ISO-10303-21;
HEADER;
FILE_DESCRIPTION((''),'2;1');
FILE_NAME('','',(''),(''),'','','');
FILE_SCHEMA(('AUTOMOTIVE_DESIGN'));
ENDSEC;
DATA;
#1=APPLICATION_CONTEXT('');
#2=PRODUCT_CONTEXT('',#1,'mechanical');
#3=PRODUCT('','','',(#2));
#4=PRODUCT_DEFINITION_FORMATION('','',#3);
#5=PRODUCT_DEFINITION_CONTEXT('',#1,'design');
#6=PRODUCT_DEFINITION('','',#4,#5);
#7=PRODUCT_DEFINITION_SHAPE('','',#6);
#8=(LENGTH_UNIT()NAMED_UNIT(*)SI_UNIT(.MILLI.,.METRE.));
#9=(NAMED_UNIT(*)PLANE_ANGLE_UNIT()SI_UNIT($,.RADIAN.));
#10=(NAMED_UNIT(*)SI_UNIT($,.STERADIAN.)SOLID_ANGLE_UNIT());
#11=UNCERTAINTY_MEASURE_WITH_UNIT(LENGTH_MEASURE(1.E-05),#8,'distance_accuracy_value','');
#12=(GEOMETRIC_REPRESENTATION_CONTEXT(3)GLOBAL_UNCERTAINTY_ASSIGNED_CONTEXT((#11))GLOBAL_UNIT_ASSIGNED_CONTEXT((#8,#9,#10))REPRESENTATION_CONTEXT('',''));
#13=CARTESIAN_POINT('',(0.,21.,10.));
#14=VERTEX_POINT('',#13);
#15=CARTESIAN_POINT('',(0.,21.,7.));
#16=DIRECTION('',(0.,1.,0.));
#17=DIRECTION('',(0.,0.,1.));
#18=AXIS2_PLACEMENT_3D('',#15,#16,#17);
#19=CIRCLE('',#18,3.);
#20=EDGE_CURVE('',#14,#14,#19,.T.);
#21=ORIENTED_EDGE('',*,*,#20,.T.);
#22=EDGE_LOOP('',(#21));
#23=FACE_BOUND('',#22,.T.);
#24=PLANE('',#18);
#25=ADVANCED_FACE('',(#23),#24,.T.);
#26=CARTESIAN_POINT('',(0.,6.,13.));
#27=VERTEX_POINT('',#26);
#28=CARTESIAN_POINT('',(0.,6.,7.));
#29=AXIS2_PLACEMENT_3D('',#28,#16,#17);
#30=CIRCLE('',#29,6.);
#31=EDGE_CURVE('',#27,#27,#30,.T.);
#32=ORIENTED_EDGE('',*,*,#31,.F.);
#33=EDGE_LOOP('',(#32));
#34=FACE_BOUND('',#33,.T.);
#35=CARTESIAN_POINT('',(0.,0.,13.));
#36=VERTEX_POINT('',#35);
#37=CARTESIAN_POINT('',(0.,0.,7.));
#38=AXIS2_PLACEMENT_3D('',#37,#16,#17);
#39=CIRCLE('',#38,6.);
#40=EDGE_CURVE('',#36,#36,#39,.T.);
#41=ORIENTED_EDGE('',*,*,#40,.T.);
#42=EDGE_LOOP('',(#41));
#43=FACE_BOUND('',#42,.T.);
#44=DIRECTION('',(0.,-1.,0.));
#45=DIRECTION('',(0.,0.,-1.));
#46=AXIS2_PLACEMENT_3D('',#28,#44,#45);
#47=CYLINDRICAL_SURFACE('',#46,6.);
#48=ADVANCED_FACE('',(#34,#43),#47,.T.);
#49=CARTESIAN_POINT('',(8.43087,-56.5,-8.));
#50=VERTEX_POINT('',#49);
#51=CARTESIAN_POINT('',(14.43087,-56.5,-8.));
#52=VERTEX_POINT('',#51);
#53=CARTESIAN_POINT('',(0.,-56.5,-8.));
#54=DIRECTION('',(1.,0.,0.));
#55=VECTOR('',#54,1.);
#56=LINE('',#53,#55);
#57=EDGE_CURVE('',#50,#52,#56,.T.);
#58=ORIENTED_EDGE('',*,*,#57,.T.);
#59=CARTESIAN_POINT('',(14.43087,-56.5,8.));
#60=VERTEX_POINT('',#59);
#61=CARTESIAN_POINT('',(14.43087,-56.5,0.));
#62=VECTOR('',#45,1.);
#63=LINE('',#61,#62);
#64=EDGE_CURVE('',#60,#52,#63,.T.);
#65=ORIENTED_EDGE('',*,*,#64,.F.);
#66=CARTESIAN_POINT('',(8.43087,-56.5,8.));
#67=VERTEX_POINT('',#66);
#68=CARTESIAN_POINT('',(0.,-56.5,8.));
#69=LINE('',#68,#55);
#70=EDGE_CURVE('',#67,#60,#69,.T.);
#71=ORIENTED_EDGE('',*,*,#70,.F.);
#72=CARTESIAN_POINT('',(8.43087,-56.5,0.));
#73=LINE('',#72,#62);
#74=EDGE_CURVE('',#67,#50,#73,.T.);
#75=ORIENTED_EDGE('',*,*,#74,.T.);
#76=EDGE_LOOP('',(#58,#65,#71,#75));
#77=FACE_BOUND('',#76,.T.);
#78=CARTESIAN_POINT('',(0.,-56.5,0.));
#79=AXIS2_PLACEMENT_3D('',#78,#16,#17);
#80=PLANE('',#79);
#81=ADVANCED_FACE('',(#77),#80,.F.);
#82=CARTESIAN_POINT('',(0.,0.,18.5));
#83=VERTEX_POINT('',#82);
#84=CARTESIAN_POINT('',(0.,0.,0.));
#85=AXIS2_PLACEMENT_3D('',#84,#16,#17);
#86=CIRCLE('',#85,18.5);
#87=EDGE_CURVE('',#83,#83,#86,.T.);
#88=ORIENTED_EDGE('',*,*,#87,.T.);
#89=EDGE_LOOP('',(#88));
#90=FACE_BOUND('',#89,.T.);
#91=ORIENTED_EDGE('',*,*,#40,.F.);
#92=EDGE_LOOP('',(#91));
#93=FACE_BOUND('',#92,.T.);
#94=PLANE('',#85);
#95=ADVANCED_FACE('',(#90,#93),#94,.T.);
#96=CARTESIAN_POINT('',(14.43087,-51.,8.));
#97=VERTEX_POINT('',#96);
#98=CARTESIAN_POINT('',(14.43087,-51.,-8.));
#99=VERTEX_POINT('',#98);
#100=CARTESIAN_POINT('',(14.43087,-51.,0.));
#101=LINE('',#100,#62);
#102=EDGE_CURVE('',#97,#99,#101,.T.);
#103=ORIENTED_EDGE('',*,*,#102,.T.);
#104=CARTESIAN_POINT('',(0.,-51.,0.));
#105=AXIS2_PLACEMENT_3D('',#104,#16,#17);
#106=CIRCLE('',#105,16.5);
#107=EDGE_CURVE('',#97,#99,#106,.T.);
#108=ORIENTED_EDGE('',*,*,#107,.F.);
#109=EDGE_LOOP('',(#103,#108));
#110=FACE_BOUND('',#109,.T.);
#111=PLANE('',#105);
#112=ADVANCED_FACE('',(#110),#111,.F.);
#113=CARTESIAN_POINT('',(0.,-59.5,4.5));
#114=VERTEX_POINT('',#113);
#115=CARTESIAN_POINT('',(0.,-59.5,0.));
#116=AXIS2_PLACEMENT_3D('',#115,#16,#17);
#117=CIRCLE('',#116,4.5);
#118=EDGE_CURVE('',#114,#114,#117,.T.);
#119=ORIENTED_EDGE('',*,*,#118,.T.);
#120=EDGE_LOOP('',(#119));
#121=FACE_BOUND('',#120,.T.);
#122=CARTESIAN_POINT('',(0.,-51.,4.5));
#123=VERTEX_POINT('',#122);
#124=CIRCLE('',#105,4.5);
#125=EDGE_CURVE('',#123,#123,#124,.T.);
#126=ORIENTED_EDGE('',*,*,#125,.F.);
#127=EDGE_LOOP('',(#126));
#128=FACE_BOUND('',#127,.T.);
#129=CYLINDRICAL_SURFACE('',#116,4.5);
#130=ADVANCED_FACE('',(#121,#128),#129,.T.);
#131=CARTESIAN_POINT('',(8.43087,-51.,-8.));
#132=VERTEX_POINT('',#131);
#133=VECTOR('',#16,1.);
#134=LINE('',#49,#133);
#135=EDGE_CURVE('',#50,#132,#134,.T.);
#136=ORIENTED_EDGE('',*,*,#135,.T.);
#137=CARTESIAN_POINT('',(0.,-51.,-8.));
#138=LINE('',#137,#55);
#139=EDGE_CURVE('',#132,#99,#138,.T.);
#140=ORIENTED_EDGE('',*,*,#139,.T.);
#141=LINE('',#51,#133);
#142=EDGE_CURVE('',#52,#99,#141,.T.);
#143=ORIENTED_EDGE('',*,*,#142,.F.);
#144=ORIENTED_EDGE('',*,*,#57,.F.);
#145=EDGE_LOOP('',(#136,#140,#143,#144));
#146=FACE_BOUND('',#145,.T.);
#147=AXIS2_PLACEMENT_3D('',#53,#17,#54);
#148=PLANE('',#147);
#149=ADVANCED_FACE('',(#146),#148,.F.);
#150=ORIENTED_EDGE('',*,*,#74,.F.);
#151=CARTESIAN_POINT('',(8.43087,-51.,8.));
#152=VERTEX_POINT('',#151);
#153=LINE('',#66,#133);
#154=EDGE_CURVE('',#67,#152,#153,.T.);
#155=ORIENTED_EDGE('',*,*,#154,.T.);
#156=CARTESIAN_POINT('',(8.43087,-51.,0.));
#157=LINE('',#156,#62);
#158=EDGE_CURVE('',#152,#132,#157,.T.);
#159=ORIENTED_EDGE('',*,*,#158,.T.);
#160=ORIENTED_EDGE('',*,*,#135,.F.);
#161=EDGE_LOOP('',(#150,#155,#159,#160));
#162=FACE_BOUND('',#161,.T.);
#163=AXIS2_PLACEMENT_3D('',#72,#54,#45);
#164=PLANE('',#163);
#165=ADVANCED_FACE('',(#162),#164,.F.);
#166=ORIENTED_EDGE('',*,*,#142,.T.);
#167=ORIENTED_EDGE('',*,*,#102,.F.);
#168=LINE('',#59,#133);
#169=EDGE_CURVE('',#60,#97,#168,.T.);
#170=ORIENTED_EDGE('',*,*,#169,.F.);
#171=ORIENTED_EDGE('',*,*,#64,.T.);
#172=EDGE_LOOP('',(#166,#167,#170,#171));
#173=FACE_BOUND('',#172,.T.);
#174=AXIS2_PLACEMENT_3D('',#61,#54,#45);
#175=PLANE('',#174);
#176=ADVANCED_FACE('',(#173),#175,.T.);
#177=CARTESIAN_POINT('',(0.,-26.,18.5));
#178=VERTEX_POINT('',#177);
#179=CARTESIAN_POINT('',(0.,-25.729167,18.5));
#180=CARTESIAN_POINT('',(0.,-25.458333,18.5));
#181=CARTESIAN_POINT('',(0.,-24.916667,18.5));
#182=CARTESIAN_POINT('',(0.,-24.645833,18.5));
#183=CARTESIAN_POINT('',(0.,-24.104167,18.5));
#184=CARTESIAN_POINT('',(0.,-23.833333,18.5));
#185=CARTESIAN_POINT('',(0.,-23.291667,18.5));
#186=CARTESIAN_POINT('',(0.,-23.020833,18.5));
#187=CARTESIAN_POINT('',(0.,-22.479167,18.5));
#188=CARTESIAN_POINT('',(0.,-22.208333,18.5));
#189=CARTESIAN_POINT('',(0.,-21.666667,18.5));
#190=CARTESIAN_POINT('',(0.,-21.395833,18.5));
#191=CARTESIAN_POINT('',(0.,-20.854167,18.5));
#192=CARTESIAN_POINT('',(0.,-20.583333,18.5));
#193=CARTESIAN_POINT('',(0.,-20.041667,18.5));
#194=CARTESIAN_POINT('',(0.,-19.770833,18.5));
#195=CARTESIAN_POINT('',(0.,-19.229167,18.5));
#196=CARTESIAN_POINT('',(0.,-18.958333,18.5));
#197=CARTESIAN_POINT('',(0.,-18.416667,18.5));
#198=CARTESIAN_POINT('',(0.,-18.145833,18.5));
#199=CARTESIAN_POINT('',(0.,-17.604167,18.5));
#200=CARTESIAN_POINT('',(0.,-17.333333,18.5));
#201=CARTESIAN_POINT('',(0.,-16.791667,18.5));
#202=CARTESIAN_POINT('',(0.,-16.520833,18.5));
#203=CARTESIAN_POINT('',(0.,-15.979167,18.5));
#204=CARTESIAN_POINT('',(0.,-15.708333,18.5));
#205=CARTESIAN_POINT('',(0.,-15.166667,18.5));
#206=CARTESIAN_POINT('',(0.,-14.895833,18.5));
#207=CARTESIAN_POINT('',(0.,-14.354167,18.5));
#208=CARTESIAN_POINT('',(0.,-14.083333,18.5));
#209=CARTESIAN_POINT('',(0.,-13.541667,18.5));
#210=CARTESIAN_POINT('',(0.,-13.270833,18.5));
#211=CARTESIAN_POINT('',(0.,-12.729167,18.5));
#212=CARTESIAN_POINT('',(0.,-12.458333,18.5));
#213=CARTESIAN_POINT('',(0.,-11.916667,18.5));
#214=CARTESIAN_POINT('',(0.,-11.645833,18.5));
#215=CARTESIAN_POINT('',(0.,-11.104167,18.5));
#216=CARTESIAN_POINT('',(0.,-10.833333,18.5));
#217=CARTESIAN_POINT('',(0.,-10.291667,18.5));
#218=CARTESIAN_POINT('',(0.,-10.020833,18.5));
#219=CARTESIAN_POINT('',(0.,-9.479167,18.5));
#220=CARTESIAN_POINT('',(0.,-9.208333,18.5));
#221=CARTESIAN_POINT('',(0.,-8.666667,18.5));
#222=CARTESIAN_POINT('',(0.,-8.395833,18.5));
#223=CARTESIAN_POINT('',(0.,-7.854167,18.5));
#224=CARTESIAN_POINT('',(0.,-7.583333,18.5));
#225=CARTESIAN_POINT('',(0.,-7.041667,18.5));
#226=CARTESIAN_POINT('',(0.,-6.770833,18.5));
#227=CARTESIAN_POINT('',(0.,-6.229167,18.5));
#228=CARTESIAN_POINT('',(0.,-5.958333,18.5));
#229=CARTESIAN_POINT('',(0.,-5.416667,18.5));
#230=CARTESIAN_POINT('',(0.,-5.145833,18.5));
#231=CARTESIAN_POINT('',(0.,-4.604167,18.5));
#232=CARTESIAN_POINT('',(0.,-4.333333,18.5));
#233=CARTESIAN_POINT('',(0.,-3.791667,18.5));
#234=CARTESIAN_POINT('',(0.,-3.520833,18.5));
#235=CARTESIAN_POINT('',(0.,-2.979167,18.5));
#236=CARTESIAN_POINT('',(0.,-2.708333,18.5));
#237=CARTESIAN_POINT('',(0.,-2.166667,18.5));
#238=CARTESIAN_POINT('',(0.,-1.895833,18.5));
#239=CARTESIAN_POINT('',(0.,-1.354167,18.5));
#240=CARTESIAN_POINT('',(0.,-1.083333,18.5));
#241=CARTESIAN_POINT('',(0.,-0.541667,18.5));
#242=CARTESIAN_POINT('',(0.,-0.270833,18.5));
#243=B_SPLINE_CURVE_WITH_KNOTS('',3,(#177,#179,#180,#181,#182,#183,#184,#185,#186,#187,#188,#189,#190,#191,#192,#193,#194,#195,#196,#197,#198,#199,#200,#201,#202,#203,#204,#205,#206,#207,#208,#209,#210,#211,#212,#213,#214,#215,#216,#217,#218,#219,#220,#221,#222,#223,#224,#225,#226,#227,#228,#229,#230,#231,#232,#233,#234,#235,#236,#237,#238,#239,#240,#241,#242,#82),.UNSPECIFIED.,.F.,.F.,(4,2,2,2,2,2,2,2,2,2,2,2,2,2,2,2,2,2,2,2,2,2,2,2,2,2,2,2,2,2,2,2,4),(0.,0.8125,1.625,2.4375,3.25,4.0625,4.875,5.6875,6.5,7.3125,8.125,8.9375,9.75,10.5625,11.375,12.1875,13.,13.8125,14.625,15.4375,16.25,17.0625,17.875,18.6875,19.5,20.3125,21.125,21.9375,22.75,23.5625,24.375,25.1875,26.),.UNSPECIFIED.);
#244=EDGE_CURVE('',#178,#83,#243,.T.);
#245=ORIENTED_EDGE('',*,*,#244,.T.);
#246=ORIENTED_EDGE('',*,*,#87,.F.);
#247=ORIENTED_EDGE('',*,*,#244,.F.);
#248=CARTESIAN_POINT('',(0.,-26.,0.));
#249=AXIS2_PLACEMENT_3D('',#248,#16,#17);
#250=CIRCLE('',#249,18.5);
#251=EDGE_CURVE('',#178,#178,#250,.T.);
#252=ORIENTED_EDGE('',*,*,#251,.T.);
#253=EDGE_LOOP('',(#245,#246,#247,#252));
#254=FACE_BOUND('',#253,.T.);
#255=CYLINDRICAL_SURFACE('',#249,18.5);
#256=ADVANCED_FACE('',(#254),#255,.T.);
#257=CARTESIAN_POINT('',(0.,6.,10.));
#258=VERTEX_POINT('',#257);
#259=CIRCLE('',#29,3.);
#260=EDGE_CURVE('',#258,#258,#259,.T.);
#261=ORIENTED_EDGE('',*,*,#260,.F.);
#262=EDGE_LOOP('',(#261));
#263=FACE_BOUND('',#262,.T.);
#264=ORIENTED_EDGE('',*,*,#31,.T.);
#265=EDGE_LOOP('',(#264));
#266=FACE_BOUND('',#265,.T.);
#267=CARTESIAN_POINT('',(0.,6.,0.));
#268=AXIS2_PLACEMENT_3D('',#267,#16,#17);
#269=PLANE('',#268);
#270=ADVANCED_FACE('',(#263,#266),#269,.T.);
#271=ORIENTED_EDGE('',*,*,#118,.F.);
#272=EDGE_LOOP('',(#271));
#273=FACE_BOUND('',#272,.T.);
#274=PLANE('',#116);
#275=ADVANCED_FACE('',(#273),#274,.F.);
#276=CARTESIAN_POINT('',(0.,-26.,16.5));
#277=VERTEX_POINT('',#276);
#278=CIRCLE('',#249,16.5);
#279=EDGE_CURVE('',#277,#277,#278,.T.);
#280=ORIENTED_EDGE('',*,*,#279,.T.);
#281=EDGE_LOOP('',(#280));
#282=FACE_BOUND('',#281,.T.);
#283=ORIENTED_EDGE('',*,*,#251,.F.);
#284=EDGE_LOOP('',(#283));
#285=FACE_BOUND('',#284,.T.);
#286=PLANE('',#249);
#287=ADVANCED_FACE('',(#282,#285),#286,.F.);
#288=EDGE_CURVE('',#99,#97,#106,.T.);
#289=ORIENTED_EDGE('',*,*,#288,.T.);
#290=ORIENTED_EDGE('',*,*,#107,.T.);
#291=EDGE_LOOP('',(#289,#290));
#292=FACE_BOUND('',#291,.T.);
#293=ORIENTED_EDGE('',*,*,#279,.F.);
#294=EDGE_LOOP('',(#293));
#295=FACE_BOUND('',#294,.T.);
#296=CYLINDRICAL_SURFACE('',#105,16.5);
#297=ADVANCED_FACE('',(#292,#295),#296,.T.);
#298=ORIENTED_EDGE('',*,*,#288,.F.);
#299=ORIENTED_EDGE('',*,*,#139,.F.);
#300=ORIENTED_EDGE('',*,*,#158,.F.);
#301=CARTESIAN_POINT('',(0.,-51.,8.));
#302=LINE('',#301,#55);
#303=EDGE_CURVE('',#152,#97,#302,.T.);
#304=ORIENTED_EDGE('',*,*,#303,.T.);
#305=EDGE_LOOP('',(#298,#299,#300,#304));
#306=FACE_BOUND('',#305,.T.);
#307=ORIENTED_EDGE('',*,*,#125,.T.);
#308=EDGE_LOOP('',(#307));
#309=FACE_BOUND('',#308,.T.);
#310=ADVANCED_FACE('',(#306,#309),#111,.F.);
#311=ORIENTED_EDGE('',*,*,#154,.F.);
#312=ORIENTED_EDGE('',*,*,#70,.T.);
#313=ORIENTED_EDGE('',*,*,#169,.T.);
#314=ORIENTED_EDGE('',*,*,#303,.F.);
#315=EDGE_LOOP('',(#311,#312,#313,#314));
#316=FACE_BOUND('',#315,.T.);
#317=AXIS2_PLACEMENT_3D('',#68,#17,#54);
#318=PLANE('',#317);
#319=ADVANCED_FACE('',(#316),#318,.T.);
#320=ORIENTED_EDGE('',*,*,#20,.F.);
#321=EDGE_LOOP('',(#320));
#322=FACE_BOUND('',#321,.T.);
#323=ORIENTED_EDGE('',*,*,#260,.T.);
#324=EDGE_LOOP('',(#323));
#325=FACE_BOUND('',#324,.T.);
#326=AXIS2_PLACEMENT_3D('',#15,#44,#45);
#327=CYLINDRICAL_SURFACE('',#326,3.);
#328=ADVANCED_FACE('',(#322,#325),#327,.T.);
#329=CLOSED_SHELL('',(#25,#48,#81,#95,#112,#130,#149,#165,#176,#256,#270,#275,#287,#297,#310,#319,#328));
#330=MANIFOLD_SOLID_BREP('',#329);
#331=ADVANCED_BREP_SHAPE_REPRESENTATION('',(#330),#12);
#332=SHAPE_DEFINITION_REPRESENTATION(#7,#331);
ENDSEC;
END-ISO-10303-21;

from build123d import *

# Parameters (mm, degrees)
SKETCH1_R           = 18.5
SKETCH1_R_2         = 16.5
SKETCH1_R_3         = 6
SKETCH1_R_4         = 4.5
SKETCH1_W           = 6
SKETCH1_H           = 16
SKETCH1_R_5         = 3
BOSS_EXTRUDE1_DEPTH = 26
BOSS_EXTRUDE2_START = -26
SKETCH1_3_R         = 16.5
BOSS_EXTRUDE2_DEPTH = 25
BOSS_EXTRUDE3_START = -56.5
SKETCH1_4_W         = 6
SKETCH1_4_H         = 16
BOSS_EXTRUDE3_DEPTH = 5.5
BOSS_EXTRUDE4_START = -51
SKETCH1_5_R         = 4.5
BOSS_EXTRUDE4_DEPTH = 8.5
SKETCH1_6_R         = 6
BOSS_EXTRUDE5_DEPTH = 6
BOSS_EXTRUDE6_START = 6
SKETCH1_7_R         = 3
BOSS_EXTRUDE6_DEPTH = 15


with BuildPart() as part:
    # Sketch1 → Boss-Extrude1 (new body)
    # profile 1 of 14: a face of its own
    with BuildSketch(Plane(origin=(0, 0, 0), x_dir=(1, 0, 0), z_dir=(0, 1, 0))):
        with Locations(Location((0, 0, 0), (0, 0, 270))):
            Circle(SKETCH1_R)
        Circle(SKETCH1_R_2, mode=Mode.SUBTRACT)
    # profile 2 of 14: a face of its own
    with BuildSketch(Plane(origin=(0, 0, 0), x_dir=(1, 0, 0), z_dir=(0, 1, 0))):
        with BuildLine():
            Line((14.43086969, -8), (8.43086969, -8))
            Line((8.43086969, -8), (8.43086969, 8))
            Line((8.43086969, 8), (14.43086969, 8))
            ThreePointArc((14.43086969, 8), (-16.5, 0), (14.43086969, -8))
        make_face()
        with BuildLine():
            ThreePointArc((3.822221213, -2.375), (5.428320517, -4.443960806), (6, -7))
            ThreePointArc((6, -7), (-2.556039194, -12.428320517), (-3.822221213, -2.375))
            ThreePointArc((-3.822221213, -2.375), (-1.234909823, 4.327239042), (4.5, 0))
            ThreePointArc((4.5, 0), (4.327239042, -1.234909823), (3.822221213, -2.375))
        make_face(mode=Mode.SUBTRACT)
    # profile 3 of 14: a face of its own
    with BuildSketch(Plane(origin=(0, 0, 0), x_dir=(1, 0, 0), z_dir=(0, 1, 0))):
        with Locations((0, -7)):
            Circle(SKETCH1_R_3)
    # profile 4 of 14: a face of its own
    with BuildSketch(Plane(origin=(0, 0, 0), x_dir=(1, 0, 0), z_dir=(0, 1, 0))):
        Circle(SKETCH1_R_4)
    # profile 5 of 14: a face of its own
    with BuildSketch(Plane(origin=(0, 0, 0), x_dir=(1, 0, 0), z_dir=(0, 1, 0))):
        with Locations((11.43086969, 0)):
            Rectangle(SKETCH1_W, SKETCH1_H)
    # profile 6 of 14: a face of its own
    with BuildSketch(Plane(origin=(0, 0, 0), x_dir=(1, 0, 0), z_dir=(0, 1, 0))):
        with BuildLine():
            Line((14.43086969, 8), (14.43086969, -8))
            ThreePointArc((14.43086969, -8), (15.974344273, -4.13162499), (16.5, 0))
            ThreePointArc((16.5, 0), (15.974344273, 4.13162499), (14.43086969, 8))
        make_face()
    # profile 7 of 14: a face of its own
    with BuildSketch(Plane(origin=(0, 0, 0), x_dir=(1, 0, 0), z_dir=(0, 1, 0))):
        Circle(SKETCH1_R_4)
    # profile 8 of 14: a face of its own
    with BuildSketch(Plane(origin=(0, 0, 0), x_dir=(1, 0, 0), z_dir=(0, 1, 0))):
        with Locations((0, -7)):
            Circle(SKETCH1_R_3)
        with Locations((0, -7)):
            Circle(SKETCH1_R_5, mode=Mode.SUBTRACT)
    # profile 9 of 14: a face of its own
    with BuildSketch(Plane(origin=(0, 0, 0), x_dir=(1, 0, 0), z_dir=(0, 1, 0))):
        Circle(SKETCH1_R_4)
    # profile 10 of 14: a face of its own
    with BuildSketch(Plane(origin=(0, 0, 0), x_dir=(1, 0, 0), z_dir=(0, 1, 0))):
        Circle(SKETCH1_R_4)
    # profile 11 of 14: a face of its own
    with BuildSketch(Plane(origin=(0, 0, 0), x_dir=(1, 0, 0), z_dir=(0, 1, 0))):
        with Locations((0, -7)):
            Circle(SKETCH1_R_3)
        with Locations((0, -7)):
            Circle(SKETCH1_R_5, mode=Mode.SUBTRACT)
    # profile 12 of 14: a face of its own
    with BuildSketch(Plane(origin=(0, 0, 0), x_dir=(1, 0, 0), z_dir=(0, 1, 0))):
        with Locations((0, -7)):
            Circle(SKETCH1_R_5)
    # profile 13 of 14: a face of its own
    with BuildSketch(Plane(origin=(0, 0, 0), x_dir=(1, 0, 0), z_dir=(0, 1, 0))):
        with Locations((0, -7)):
            Circle(SKETCH1_R_5)
    # profile 14 of 14: a face of its own
    with BuildSketch(Plane(origin=(0, 0, 0), x_dir=(1, 0, 0), z_dir=(0, 1, 0))):
        Circle(SKETCH1_R_4)
    extrude(amount=-BOSS_EXTRUDE1_DEPTH)

    # Sketch1<3> → Boss-Extrude2 (add)
    with BuildSketch(Plane(origin=(0, 0, 0), x_dir=(1, 0, 0), z_dir=(0, 1, 0)).offset(BOSS_EXTRUDE2_START)):
        with Locations(Location((0, 0, 0), (0, 0, 270))):
            Circle(SKETCH1_3_R)
    extrude(amount=-BOSS_EXTRUDE2_DEPTH)

    # Sketch1<4> → Boss-Extrude3 (add)
    with BuildSketch(Plane(origin=(0, 0, 0), x_dir=(1, 0, 0), z_dir=(0, 1, 0)).offset(BOSS_EXTRUDE3_START)):
        with Locations((11.43086969, 0)):
            Rectangle(SKETCH1_4_W, SKETCH1_4_H)
    extrude(amount=BOSS_EXTRUDE3_DEPTH)

    # Sketch1<5> → Boss-Extrude4 (add)
    with BuildSketch(Plane(origin=(0, 0, 0), x_dir=(1, 0, 0), z_dir=(0, 1, 0)).offset(BOSS_EXTRUDE4_START)):
        with Locations(Location((0, 0, 0), (0, 0, 270))):
            Circle(SKETCH1_5_R)
    extrude(amount=-BOSS_EXTRUDE4_DEPTH)

    # Sketch1<6> → Boss-Extrude5 (add)
    with BuildSketch(Plane(origin=(0, 0, 0), x_dir=(1, 0, 0), z_dir=(0, 1, 0))):
        with Locations(Location((0, -7, 0), (0, 0, 270))):
            Circle(SKETCH1_6_R)
    extrude(amount=BOSS_EXTRUDE5_DEPTH)

    # Sketch1<7> → Boss-Extrude6 (add)
    with BuildSketch(Plane(origin=(0, 0, 0), x_dir=(1, 0, 0), z_dir=(0, 1, 0)).offset(BOSS_EXTRUDE6_START)):
        with Locations(Location((0, -7, 0), (0, 0, 270))):
            Circle(SKETCH1_7_R)
    extrude(amount=BOSS_EXTRUDE6_DEPTH)


solid = part.part
